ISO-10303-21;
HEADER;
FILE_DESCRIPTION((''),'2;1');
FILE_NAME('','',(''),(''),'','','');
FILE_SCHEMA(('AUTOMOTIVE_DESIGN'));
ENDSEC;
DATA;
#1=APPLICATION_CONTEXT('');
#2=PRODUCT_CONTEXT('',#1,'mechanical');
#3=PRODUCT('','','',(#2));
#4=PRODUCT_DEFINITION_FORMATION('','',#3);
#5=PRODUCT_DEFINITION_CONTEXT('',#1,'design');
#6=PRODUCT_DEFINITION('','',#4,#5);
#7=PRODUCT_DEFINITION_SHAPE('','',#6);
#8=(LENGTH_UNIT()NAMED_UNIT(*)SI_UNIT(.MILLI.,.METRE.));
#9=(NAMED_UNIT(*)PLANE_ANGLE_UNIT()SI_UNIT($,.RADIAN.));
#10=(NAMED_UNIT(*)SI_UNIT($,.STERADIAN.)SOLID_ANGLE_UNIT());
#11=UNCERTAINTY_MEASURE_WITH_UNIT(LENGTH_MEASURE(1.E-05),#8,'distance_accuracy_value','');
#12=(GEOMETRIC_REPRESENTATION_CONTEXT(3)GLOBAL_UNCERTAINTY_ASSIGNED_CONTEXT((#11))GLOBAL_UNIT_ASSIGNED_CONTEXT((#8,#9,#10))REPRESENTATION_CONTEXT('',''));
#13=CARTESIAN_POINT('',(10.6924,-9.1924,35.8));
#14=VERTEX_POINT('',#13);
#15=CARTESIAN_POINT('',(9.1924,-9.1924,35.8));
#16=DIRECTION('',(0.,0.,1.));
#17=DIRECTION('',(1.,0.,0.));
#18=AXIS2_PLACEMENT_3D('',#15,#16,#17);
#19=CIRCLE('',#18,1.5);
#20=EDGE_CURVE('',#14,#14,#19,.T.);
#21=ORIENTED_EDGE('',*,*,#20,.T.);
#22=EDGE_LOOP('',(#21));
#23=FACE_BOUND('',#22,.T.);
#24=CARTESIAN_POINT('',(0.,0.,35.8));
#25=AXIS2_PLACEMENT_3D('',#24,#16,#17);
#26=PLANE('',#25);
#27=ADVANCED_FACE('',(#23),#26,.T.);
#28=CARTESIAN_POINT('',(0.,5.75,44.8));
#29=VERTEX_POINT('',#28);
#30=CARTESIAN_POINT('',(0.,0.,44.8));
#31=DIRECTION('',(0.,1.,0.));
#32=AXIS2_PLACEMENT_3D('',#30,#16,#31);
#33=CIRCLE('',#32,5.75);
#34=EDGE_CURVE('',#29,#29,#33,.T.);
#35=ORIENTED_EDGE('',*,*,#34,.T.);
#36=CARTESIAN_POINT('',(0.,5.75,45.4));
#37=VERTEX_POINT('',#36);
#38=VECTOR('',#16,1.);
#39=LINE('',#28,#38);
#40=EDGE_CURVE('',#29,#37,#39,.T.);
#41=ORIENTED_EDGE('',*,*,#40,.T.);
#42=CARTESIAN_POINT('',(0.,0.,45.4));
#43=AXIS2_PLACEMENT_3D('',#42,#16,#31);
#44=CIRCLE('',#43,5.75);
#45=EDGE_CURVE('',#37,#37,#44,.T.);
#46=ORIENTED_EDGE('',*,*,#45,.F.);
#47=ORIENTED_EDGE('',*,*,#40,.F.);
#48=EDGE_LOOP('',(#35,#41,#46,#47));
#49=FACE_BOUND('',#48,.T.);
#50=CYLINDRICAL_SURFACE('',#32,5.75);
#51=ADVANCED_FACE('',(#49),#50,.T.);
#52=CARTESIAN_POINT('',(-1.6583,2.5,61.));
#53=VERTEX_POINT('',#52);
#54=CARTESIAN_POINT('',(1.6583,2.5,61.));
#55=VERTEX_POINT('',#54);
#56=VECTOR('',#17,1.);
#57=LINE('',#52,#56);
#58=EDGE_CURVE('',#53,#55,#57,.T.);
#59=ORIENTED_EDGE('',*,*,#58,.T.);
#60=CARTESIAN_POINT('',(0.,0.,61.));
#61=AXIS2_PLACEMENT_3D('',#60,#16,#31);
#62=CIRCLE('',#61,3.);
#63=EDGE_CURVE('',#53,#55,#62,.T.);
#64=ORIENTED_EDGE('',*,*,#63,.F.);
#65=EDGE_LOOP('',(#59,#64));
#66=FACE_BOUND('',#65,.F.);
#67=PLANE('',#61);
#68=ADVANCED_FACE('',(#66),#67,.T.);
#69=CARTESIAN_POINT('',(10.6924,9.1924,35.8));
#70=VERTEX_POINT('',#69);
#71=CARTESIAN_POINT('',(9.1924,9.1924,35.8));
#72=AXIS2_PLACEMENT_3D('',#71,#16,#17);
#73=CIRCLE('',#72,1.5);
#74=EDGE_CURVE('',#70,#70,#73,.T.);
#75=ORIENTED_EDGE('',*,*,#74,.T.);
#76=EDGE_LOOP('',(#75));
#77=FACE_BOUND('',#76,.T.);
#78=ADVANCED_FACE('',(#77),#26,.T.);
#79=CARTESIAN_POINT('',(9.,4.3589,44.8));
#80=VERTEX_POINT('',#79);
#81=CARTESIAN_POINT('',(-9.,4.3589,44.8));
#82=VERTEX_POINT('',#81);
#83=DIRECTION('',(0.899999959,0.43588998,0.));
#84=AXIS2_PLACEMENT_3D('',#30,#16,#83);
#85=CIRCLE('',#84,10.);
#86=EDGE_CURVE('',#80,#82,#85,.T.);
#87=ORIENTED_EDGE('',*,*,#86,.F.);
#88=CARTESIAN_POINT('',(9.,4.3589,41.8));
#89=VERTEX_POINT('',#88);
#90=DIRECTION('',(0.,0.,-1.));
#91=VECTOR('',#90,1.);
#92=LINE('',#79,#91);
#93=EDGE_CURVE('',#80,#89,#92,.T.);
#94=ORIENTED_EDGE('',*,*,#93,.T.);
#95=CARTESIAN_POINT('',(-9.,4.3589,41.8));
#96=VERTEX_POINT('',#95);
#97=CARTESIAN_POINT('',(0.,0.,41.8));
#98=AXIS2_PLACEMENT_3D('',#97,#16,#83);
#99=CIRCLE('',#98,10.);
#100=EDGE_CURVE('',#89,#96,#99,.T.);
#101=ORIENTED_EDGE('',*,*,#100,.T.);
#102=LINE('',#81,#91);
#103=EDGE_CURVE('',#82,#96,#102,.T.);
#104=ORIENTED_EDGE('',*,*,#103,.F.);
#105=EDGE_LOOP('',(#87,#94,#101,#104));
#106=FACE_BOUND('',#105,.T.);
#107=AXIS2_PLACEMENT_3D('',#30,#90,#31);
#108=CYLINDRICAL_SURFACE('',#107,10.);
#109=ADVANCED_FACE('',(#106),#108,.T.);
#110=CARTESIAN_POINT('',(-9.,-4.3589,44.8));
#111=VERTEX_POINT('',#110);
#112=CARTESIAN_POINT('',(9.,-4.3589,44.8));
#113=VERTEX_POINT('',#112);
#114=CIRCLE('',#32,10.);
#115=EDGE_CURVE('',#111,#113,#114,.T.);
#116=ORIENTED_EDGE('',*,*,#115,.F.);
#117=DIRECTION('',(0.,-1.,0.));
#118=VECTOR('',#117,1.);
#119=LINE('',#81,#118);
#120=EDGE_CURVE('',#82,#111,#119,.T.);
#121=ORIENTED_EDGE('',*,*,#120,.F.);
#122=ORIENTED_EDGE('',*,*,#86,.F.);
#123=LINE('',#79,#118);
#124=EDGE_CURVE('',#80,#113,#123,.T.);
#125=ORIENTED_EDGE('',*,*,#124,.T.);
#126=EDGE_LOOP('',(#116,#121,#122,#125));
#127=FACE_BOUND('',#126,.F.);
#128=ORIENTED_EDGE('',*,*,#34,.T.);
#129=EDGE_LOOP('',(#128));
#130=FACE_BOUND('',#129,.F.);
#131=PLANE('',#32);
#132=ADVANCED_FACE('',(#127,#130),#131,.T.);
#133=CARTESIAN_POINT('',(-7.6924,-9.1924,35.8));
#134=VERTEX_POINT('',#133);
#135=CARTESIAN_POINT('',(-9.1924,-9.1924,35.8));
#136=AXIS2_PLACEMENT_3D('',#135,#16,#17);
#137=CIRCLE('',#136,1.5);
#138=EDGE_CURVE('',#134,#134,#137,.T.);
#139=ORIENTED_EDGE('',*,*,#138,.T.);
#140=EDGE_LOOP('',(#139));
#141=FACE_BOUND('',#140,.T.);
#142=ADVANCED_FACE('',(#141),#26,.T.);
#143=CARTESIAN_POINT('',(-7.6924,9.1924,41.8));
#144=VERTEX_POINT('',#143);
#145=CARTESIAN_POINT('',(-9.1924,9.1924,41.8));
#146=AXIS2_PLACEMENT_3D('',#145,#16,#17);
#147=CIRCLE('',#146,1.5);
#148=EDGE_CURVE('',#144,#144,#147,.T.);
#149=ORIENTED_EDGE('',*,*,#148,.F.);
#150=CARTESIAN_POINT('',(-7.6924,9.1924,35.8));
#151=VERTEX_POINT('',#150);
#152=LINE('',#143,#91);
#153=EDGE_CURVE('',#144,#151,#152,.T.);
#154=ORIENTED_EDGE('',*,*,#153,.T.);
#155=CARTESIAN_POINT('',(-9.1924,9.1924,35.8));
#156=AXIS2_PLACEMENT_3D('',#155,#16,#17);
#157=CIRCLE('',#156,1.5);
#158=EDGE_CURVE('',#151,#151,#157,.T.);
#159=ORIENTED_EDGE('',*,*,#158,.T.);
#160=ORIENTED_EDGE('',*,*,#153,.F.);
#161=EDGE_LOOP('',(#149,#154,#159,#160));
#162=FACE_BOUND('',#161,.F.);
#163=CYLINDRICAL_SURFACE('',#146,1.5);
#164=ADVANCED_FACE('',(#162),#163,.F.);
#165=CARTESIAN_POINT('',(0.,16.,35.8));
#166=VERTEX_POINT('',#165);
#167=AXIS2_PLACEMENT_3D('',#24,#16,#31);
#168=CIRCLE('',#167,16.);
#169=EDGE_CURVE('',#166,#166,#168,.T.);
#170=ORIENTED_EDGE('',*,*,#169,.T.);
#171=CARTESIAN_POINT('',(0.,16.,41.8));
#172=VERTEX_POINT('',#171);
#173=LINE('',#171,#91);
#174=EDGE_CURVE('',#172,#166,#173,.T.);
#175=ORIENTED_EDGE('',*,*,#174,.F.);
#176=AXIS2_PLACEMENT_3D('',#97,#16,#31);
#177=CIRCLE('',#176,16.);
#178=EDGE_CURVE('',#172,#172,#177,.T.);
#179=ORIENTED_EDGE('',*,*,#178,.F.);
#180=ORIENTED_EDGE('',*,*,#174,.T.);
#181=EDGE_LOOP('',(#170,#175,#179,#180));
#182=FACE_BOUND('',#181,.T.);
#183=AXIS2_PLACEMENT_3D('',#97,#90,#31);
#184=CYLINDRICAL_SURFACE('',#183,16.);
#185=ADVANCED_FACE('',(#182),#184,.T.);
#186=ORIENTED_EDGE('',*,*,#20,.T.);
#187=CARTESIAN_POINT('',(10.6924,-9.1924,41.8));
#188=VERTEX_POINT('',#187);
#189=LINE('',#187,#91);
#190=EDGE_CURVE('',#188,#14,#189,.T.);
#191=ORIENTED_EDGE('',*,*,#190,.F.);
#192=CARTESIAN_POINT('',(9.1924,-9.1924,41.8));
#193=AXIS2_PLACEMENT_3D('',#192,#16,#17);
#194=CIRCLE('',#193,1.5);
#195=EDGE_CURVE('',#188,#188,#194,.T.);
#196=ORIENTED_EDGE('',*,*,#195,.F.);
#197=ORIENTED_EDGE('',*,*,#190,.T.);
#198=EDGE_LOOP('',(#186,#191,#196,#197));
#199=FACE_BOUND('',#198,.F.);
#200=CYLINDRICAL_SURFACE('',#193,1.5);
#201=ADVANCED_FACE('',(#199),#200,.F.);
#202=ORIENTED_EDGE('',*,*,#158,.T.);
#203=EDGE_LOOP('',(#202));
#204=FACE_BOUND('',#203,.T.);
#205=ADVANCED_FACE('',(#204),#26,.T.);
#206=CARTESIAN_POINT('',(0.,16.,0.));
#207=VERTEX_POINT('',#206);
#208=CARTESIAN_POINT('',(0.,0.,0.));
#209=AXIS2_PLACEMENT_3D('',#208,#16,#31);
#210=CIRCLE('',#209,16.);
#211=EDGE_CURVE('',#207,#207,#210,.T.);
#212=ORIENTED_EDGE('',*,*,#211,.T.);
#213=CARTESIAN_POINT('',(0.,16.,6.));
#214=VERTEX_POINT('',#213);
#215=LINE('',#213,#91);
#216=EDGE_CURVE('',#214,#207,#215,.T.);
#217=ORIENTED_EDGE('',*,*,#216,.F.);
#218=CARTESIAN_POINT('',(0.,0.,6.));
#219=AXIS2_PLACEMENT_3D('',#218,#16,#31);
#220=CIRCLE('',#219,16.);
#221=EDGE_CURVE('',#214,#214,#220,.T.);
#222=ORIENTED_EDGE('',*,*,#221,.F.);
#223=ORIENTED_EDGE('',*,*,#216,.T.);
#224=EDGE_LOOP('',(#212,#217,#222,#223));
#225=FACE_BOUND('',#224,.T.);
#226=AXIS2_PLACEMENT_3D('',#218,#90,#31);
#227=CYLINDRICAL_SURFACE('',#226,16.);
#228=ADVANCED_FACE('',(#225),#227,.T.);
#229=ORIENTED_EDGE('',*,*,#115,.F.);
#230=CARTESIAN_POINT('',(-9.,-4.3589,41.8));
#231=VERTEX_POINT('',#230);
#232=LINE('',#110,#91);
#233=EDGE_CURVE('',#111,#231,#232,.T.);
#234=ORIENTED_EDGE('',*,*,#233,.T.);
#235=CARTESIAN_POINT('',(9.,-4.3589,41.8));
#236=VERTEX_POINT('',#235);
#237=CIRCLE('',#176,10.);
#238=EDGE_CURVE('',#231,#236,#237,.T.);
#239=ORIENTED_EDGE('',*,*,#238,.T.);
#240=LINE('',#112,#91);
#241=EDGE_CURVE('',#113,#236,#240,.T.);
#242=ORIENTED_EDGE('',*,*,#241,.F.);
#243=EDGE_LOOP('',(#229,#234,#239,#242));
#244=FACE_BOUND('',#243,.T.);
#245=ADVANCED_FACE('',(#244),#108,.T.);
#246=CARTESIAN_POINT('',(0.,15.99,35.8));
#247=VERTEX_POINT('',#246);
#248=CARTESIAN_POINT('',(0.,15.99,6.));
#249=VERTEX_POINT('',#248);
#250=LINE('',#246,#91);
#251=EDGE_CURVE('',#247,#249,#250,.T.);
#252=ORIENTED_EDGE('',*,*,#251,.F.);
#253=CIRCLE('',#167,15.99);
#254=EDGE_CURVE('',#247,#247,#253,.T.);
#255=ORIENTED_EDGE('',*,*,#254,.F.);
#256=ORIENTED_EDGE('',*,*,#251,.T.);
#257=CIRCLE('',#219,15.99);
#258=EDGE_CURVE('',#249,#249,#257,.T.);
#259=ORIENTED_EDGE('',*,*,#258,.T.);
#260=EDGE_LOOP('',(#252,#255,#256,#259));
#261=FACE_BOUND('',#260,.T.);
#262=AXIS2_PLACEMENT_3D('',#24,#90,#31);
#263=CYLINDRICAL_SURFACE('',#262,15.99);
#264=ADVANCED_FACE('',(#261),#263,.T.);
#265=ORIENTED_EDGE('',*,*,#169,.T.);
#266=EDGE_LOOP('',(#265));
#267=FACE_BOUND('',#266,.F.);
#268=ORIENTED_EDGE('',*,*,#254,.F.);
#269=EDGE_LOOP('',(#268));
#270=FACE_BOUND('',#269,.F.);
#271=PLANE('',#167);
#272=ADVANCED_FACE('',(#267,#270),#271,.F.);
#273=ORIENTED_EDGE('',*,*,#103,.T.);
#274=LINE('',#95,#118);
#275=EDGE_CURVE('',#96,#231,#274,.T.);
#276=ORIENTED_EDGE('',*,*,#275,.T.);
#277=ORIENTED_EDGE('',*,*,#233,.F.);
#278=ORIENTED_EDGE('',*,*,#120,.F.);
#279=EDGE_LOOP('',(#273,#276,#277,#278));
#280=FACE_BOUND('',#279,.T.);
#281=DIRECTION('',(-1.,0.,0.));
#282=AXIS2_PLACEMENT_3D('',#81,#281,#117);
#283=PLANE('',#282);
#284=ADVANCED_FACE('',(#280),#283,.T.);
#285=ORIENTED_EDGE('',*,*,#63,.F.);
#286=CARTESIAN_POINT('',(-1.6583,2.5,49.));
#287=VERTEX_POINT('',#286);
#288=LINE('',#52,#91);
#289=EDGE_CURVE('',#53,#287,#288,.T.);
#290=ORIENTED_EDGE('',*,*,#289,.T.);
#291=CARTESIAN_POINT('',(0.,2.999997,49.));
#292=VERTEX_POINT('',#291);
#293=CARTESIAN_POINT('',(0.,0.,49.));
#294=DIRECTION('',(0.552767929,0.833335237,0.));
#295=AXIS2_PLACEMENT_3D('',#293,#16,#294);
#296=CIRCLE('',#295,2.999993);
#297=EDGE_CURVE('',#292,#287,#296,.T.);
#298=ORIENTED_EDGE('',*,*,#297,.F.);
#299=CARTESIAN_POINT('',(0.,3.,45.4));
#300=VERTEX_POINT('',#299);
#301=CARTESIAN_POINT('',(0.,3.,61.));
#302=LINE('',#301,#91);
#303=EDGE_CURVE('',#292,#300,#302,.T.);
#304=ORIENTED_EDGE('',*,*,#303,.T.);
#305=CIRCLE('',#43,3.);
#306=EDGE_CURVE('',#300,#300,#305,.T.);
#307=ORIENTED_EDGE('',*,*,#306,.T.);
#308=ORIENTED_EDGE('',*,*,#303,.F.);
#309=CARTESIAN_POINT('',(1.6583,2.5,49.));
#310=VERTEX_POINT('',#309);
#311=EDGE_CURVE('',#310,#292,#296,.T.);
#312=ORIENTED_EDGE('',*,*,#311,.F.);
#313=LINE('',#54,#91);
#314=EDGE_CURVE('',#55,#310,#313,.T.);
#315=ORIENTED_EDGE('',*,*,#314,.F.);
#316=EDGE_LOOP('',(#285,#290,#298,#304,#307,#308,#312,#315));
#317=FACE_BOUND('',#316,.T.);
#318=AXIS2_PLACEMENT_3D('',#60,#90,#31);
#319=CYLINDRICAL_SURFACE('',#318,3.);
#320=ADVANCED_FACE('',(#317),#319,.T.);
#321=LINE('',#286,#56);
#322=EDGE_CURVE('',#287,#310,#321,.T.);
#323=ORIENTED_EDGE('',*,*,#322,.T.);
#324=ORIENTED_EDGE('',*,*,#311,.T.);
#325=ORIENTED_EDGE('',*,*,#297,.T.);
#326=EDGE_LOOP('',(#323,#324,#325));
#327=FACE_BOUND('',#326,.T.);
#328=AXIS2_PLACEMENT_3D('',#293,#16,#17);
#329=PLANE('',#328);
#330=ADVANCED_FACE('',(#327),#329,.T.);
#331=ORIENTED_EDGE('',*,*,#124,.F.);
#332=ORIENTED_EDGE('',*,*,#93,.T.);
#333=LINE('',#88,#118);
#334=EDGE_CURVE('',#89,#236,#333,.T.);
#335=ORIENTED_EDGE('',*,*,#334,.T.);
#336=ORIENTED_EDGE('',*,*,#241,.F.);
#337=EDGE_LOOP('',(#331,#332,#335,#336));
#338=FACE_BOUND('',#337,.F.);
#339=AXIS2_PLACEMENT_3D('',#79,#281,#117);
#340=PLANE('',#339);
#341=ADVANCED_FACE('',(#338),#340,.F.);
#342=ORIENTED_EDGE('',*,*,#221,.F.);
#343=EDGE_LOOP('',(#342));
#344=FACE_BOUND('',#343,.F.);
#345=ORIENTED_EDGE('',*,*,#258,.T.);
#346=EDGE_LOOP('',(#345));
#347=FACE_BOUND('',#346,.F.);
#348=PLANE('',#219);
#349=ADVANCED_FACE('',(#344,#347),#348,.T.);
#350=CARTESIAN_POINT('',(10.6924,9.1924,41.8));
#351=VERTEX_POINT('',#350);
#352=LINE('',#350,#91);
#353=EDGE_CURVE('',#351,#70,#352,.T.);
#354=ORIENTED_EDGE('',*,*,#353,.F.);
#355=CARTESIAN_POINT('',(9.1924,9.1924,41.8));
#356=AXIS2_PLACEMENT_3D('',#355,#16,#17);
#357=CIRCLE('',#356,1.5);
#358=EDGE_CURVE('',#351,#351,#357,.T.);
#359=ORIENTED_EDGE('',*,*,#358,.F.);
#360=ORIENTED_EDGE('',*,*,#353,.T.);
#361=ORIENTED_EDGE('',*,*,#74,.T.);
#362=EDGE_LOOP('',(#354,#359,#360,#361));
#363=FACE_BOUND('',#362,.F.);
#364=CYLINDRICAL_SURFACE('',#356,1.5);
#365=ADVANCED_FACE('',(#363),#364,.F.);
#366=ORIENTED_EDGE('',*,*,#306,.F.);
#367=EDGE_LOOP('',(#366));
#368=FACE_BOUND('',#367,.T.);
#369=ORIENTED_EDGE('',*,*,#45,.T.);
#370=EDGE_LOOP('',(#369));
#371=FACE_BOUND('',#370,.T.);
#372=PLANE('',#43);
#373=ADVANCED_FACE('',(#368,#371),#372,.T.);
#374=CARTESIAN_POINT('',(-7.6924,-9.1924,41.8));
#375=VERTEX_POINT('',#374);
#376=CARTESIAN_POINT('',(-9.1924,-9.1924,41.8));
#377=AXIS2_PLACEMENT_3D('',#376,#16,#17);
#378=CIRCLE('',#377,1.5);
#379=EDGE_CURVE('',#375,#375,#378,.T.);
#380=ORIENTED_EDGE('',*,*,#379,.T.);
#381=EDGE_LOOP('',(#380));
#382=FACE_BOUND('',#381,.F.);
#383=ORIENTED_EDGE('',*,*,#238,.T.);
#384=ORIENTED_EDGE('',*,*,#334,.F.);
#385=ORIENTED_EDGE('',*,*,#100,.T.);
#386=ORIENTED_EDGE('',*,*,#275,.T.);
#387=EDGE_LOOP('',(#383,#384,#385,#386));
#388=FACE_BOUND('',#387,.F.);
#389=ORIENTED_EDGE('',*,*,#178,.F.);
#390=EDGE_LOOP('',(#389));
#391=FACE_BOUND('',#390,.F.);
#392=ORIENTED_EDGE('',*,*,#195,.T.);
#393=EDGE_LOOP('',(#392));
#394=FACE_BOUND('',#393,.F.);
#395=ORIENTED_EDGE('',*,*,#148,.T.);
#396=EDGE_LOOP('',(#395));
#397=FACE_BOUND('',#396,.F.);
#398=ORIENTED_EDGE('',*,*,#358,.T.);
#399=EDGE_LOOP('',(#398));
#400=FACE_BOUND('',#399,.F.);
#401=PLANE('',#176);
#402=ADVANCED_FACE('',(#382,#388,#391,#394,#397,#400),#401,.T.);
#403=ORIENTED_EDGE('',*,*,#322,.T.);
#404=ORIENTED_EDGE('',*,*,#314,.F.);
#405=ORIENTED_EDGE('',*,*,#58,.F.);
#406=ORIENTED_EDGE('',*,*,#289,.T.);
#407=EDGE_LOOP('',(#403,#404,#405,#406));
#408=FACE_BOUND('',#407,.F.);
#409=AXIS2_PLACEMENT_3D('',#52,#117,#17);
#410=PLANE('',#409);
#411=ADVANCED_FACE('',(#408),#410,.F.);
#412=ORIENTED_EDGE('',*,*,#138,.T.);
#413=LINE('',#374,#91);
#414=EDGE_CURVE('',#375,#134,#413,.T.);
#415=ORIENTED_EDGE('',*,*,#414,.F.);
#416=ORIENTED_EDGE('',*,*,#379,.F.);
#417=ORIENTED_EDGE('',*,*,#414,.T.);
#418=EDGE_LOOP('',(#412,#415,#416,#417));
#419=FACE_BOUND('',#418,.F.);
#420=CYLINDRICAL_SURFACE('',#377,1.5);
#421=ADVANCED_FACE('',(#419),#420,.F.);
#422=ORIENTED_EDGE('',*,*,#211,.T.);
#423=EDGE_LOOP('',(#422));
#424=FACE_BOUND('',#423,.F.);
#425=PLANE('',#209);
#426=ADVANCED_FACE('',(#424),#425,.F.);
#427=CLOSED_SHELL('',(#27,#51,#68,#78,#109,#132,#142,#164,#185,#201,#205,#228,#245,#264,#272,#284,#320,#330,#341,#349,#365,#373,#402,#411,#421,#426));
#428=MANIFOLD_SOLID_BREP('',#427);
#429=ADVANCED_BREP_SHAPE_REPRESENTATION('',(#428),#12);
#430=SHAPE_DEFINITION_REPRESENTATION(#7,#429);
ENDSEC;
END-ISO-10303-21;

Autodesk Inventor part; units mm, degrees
ref_plane "YZ Plane" through (0, 0, 0) normal (1, 0, 0) x (0, 1, 0)
ref_plane "XZ Plane" through (0, 0, 0) normal (0, 1, 0) x (-1, 0, 0)
ref_plane "XY Plane" through (0, 0, 0) normal (0, 0, 1) x (1, 0, 0)
sketch "Sketch1" plane through (0, 0, 0) normal (1, 0, 0) x (0, 1, 0)
  line L0 (0, 61) -> (3, 61)
  line L1 (3, 61) -> (3, 44.8)
  line L2 (3, 44.8) -> (10, 44.8)
  line L3 (10, 44.8) -> (10, 41.8)
  line L4 (10, 41.8) -> (16, 41.8)
  line L5 (16, 41.8) -> (16, 35.8)
  line L6 (16, 35.8) -> (15.99, 35.8)
  line L7 (15.99, 35.8) -> (15.99, 6)
  line L8 (15.99, 6) -> (16, 6)
  line L9 (16, 6) -> (16, 0)
  line L10 (16, 0) -> (0, 0)
  line L11 (0, 0) -> (0, 61)
  line L12 (5.75, 45.4) -> (3, 45.4)
  line L13 (3, 45.4) -> (3, 44.8)
  line L14 (3, 44.8) -> (5.75, 44.8)
  line L15 (5.75, 44.8) -> (5.75, 45.4)
  point P0 (1.5, 61)
  dimension "d0" = 6
  dimension "d1" = 32
  dimension "d2" = 6
  dimension "d3" = 19.2
  dimension "d4" = 41.8
  dimension "d5" = 3
  dimension "d6" = 20
  dimension "d7" = 0.01
  dimension "d24" = 0.6
  dimension "d25" = 11.5
revolve "Revolution1" add sketch "Sketch1" angle 360 about axis through (0, 0, 0) along (0, 0, 1)
sketch "Sketch2" plane through (0, 0, 61) normal (0, 0, 1) x (1, 0, 0)
  arc A0 (1.6583, 2.5) -> (-1.6583, 2.5) centre (0, 0) ccw
  line L0 (-1.6583, 2.5) -> (1.6583, 2.5)
  circle A1 centre (0, 0) radius 3 projected
  dimension "d9" = 2.5
extrude "Extrusion1" cut sketch "Sketch2" against normal blind 12 contours L0 A0
sketch "Sketch3" plane through (0, 0, 44.8) normal (0, 0, 1) x (1, 0, 0)
  line L0 (-9, 4.3589) -> (-9, -4.3589)
  line L1 (9, 4.3589) -> (9, -4.3589)
  arc A0 (-9, 4.3589) -> (-9, -4.3589) centre (0, 0) ccw
  arc A1 (9, -4.3589) -> (9, 4.3589) centre (0, 0) ccw
  circle A2 centre (0, 0) radius 10 construction
  dimension "d12" = 18
extrude "Extrusion2" cut sketch "Sketch3" against normal up to surface (3 mm away)
sketch "Sketch4" plane through (0, 0, 41.8) normal (0, 0, 1) x (1, 0, 0)
  line L0 (0, 0) -> (-9.1924, 9.1924) construction
  circle A0 centre (-9.1924, 9.1924) radius 1.5
  line L1 (0, 0) -> (-13, 0) construction
  circle A1 centre (-9.1924, -9.1924) radius 1.5
  circle A2 centre (9.1924, -9.1924) radius 1.5
  circle A3 centre (9.1924, 9.1924) radius 1.5
  dimension "d15" = 3
  dimension "d16" = 13
  dimension "d17" = 45
  dimension "d20" = 360
extrude "Extrusion3" cut sketch "Sketch4" against normal blind 6
properties part number "PlanetaryGearbox"
